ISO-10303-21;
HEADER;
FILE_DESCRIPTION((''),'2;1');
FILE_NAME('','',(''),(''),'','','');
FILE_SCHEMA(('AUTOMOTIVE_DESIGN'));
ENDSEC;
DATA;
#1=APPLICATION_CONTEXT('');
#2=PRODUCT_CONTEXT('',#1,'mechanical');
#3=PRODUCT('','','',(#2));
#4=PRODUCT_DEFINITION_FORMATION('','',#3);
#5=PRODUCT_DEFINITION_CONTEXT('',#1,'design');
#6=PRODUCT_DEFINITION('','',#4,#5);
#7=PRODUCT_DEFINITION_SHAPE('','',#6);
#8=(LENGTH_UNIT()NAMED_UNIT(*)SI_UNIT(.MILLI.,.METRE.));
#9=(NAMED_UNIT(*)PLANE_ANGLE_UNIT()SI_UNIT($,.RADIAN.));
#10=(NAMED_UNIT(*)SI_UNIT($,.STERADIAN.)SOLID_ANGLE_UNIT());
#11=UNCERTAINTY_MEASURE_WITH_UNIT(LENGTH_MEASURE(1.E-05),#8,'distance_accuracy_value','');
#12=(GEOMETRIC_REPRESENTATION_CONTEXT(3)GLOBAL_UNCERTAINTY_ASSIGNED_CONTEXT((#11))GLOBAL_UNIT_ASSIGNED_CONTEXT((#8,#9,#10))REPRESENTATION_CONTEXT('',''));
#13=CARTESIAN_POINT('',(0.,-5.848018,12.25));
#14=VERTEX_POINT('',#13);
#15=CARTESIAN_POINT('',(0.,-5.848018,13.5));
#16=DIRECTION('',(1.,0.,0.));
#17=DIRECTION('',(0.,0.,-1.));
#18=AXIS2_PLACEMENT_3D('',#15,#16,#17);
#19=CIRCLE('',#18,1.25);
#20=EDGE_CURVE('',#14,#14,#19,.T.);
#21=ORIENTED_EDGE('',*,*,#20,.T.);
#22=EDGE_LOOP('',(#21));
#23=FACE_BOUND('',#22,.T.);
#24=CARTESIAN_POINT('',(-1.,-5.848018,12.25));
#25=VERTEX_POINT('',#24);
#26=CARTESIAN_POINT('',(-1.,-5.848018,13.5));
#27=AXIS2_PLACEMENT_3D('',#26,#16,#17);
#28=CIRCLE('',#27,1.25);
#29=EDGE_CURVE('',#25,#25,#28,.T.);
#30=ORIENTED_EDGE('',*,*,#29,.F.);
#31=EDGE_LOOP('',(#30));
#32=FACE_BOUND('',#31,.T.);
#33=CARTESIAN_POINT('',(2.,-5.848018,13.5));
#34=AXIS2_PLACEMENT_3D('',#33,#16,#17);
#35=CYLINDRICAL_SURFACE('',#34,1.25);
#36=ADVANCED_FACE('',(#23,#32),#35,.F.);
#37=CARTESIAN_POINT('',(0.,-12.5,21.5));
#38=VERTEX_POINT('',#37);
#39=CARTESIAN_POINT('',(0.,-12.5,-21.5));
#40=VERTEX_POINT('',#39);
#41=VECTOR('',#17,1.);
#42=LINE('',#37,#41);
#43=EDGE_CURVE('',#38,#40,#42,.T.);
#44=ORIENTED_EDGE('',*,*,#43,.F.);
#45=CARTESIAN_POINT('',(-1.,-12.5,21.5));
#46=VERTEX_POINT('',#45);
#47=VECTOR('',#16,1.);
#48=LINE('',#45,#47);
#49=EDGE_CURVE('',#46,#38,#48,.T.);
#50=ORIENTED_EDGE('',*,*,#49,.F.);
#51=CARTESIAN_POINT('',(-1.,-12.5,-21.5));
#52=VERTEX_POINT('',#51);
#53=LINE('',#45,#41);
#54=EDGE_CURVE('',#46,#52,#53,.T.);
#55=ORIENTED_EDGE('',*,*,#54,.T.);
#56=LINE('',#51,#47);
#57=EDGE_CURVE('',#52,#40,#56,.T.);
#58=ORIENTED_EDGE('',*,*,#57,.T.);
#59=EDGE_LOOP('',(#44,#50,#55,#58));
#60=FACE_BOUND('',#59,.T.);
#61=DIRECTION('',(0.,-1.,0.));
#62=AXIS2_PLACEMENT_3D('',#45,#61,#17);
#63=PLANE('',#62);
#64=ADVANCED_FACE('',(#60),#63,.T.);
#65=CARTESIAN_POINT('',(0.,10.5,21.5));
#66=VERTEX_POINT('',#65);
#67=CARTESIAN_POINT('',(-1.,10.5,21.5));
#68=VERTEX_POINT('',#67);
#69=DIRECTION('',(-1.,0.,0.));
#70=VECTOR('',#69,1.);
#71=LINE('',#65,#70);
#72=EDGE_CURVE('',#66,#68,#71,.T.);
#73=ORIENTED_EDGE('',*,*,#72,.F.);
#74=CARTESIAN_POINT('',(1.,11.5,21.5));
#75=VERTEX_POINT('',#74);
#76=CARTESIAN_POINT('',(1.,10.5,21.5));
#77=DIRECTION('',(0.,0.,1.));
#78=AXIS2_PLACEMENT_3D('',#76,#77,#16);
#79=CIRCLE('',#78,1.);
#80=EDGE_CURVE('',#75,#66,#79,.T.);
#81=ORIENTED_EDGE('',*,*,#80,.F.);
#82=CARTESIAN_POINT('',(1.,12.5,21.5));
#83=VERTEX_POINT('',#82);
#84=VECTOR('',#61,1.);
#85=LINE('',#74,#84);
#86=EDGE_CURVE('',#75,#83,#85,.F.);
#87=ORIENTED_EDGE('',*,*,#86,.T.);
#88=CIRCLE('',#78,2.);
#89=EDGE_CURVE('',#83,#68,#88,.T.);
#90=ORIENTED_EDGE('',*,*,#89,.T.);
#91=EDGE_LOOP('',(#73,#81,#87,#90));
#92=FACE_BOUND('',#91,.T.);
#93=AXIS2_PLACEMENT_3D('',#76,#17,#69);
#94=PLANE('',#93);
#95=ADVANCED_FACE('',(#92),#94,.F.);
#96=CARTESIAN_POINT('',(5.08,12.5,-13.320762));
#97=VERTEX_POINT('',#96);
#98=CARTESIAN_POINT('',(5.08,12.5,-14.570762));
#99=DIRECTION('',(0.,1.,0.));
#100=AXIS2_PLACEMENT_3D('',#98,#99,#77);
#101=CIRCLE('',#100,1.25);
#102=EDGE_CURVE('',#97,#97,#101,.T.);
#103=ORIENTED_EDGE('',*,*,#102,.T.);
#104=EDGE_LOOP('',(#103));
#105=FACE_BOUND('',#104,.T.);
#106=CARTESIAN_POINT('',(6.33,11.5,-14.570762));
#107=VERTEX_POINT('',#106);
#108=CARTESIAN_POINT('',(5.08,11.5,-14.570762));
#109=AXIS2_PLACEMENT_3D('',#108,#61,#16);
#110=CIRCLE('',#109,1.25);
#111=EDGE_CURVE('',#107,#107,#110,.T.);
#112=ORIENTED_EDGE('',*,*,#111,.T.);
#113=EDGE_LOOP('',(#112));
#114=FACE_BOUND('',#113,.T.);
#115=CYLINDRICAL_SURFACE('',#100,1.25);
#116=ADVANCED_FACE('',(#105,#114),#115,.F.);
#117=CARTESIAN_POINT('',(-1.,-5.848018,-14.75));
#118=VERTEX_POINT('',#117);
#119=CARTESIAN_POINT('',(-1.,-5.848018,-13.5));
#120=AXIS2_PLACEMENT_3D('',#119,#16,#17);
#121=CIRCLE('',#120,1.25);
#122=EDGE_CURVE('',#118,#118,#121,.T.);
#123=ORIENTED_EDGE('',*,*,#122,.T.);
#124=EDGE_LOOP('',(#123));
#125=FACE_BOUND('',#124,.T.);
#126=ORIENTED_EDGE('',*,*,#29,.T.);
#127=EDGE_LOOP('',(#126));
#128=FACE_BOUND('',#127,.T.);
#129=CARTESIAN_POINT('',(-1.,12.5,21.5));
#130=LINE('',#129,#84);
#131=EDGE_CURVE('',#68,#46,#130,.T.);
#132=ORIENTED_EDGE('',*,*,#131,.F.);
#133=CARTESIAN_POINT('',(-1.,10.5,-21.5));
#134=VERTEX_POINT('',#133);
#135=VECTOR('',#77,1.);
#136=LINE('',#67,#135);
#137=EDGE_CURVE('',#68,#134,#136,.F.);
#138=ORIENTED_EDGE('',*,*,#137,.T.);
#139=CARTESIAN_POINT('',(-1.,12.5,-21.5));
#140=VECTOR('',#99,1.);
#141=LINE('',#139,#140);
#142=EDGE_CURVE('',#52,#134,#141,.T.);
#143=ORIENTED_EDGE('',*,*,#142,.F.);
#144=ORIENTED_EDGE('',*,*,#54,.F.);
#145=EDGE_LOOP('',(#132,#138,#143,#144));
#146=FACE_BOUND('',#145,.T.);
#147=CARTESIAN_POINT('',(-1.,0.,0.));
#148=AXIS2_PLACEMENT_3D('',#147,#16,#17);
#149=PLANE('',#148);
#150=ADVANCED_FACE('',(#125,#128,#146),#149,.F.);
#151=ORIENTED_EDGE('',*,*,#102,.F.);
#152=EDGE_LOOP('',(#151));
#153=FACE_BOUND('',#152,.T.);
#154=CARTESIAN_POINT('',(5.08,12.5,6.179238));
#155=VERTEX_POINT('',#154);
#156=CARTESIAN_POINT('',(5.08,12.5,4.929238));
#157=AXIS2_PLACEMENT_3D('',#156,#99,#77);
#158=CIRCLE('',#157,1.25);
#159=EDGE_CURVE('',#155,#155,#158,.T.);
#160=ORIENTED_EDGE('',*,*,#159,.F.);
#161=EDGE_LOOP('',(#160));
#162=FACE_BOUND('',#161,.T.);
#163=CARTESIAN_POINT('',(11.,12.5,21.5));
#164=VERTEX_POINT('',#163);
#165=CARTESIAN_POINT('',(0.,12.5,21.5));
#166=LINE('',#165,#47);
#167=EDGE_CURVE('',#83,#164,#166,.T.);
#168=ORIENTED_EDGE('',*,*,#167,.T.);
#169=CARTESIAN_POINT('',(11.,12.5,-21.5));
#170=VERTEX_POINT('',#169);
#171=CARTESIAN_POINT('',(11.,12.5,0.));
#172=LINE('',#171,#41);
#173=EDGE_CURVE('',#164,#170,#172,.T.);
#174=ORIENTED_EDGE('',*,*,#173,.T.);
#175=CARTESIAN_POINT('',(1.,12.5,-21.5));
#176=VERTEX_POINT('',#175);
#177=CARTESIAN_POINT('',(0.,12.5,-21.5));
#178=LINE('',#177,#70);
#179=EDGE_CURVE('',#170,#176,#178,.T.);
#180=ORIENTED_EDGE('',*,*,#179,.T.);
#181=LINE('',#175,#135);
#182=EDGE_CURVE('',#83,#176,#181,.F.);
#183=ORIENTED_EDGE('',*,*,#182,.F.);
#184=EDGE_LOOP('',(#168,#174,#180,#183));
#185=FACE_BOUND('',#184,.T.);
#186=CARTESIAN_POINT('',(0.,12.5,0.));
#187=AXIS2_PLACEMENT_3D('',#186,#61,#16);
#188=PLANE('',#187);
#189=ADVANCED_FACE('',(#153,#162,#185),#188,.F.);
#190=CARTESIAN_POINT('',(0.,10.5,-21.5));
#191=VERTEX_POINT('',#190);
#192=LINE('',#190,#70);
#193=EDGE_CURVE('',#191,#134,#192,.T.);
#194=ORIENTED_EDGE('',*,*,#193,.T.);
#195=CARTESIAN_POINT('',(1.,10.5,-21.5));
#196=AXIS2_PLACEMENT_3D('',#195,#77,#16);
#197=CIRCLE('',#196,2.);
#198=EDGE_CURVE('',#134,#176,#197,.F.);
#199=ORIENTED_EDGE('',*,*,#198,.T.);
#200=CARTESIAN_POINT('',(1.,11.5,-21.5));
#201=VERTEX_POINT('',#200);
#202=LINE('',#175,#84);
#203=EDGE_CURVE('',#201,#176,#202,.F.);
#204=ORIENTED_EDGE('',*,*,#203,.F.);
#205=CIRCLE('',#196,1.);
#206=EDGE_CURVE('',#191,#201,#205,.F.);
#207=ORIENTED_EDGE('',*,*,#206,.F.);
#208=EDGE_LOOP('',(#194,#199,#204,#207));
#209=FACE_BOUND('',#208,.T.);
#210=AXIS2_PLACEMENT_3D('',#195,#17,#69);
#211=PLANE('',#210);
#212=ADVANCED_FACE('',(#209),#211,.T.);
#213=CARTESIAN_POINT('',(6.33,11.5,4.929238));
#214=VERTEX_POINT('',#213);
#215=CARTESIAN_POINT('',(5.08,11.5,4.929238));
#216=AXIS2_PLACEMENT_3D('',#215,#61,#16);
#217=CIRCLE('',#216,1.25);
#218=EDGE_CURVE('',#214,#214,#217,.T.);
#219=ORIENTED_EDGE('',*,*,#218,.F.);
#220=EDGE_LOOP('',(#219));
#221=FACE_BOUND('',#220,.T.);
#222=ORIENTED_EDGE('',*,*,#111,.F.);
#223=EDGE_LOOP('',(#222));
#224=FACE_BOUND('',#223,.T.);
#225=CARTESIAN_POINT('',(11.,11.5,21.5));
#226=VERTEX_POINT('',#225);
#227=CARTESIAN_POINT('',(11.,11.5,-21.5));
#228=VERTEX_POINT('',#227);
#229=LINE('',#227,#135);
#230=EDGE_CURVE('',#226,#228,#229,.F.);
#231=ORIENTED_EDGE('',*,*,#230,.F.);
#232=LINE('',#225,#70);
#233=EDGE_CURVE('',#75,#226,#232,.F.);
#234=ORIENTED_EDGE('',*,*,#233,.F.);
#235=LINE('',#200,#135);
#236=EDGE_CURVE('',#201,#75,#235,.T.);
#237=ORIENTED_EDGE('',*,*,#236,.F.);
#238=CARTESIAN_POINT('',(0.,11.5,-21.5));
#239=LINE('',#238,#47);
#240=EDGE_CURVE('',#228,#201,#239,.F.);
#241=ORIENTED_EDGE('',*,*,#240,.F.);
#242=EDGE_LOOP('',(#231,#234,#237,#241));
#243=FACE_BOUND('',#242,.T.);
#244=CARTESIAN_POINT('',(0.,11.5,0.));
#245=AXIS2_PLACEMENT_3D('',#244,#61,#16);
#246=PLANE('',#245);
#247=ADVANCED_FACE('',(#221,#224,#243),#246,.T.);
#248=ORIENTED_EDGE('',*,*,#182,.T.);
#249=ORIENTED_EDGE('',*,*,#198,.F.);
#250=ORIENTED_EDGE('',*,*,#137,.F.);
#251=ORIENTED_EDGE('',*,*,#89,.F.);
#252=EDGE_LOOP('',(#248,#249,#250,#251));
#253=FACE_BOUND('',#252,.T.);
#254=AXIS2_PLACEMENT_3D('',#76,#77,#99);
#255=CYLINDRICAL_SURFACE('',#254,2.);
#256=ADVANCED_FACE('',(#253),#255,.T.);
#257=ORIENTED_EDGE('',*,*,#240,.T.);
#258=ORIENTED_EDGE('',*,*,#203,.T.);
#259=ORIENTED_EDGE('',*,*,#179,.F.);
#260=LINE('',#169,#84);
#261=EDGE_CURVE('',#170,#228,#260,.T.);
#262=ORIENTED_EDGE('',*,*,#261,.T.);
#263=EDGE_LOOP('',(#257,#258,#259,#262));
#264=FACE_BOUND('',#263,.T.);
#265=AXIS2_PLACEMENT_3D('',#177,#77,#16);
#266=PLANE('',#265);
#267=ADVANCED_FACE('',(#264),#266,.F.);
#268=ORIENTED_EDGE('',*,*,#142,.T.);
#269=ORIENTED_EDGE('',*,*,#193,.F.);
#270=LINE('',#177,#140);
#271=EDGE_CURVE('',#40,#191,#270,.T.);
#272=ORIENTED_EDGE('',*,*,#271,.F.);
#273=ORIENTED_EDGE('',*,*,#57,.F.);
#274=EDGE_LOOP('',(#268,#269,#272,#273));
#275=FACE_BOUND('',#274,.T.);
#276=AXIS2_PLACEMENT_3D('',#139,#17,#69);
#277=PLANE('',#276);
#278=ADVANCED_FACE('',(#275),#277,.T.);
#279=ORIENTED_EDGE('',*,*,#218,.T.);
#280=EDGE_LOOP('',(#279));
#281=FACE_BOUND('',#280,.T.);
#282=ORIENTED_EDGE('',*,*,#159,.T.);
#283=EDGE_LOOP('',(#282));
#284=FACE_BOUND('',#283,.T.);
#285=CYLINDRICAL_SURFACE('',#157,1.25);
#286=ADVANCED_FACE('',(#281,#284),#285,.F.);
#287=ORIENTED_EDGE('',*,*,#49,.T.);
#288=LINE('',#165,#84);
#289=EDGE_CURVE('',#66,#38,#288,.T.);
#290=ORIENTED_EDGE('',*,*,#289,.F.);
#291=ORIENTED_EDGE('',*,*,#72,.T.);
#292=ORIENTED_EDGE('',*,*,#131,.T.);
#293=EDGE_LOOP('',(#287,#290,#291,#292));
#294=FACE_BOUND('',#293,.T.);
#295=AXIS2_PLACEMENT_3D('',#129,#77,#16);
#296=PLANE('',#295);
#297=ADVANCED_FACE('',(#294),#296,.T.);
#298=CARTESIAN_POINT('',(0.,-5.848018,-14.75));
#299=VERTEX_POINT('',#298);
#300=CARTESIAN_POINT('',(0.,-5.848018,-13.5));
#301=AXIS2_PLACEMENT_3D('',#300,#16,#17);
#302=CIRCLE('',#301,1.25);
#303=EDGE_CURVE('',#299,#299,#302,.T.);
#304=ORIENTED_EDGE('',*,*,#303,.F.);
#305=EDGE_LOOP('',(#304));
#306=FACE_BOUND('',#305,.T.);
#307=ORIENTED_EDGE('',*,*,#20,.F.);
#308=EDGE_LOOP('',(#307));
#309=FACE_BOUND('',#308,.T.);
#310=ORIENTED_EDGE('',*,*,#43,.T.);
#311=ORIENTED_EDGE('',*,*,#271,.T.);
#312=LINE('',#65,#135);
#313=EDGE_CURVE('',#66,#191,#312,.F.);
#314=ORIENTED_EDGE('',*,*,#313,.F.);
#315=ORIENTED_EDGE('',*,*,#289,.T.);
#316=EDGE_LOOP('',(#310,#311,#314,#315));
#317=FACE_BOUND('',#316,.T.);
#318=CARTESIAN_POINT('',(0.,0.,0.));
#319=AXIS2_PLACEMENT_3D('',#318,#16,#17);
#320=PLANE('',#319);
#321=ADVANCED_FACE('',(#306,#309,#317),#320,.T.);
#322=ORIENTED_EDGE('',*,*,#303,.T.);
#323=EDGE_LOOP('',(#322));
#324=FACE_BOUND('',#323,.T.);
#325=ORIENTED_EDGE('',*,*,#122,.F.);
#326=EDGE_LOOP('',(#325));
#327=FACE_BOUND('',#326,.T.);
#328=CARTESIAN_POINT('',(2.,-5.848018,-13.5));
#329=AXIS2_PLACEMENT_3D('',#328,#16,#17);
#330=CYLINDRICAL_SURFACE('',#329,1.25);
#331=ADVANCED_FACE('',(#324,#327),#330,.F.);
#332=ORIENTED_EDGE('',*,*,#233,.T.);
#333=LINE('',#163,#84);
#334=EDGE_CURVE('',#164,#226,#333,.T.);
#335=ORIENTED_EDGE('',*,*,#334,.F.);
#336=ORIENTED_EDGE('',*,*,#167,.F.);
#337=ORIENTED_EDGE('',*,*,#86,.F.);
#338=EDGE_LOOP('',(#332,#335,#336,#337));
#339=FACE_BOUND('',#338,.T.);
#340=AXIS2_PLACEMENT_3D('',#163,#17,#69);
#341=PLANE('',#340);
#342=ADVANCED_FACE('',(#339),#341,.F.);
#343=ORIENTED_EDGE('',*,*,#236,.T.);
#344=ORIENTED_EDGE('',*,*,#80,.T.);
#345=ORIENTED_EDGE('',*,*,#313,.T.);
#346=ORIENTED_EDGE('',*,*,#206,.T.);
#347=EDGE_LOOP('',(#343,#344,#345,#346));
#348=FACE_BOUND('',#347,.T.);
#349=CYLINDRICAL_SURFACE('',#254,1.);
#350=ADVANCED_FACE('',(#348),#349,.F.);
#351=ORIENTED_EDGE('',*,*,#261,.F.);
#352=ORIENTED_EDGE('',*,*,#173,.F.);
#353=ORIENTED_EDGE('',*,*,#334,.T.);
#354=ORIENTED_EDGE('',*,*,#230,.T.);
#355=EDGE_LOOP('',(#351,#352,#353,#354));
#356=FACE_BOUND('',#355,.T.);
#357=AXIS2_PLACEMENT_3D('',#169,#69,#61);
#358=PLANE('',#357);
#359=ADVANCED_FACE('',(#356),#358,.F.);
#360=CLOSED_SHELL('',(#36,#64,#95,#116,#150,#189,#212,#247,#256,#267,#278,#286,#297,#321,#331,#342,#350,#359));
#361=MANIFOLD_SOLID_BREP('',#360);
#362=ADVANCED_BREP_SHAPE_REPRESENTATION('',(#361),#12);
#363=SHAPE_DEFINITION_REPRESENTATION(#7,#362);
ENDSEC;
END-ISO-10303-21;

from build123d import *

# Parameters (mm, degrees)
SKETCH1_W                    = 43
SKETCH1_H                    = 25
BASE_FLANGE1_DEPTH           = 1
EDGE_FLANGE1_STRIP_W         = 6
EDGE_FLANGE1_STRIP_H         = 1
EDGE_FLANGE1_STRIP_CUT_DEPTH = 43
EDGE_FLANGE1_DEPTH           = 43
TAP_DRILL_FOR_M3_TAP1_D      = 2.5
TAP_DRILL_FOR_M3_TAP2_D      = 2.5
TAP_DRILL_FOR_M3_TAP2_DEPTH  = 10
TAP_DRILL_FOR_M3_TAP2_TIP    = 0.751075774


# Sheet-metal steps are written as plain solids
with BuildPart() as part:
    # Sketch1 → Base-Flange1 (new body)
    with BuildSketch(Plane(origin=(0, 0, 0), x_dir=(0, 0, -1), z_dir=(1, 0, 0))):
        Rectangle(SKETCH1_W, SKETCH1_H)
    extrude(amount=-BASE_FLANGE1_DEPTH)

    # Edge-Flange1 strip (across the edge) → Edge-Flange1 strip cut (cut)
    with BuildSketch(Plane(origin=(0, 12.5, -21.5), x_dir=(0, -1, 0), z_dir=(0, 0, 1))):
        with Locations((-1, -0.5)):
            Rectangle(EDGE_FLANGE1_STRIP_W, EDGE_FLANGE1_STRIP_H)
    extrude(amount=EDGE_FLANGE1_STRIP_CUT_DEPTH, mode=Mode.SUBTRACT)

    # Edge-Flange1 section (across the edge) → Edge-Flange1 (add)
    with BuildSketch(Plane(origin=(0, 12.5, -21.5), x_dir=(0, -1, 0), z_dir=(0, 0, 1))):
        with BuildLine():
            Line((0, 1), (0, 11))
            Line((0, 11), (1, 11))
            Line((1, 11), (1, 1))
            ThreePointArc((1, 1), (1.292893219, 0.292893219), (2, 0))
            Line((2, 0), (2, -1))
            ThreePointArc((2, -1), (0.585786438, -0.414213562), (0, 1))
        make_face()
    extrude(amount=EDGE_FLANGE1_DEPTH)

    # Tap Drill for M3 Tap1 (through all)
    with Locations(Plane(origin=(-360.471522339, 12.5, -232.457964235), x_dir=(-1, 0, 0), z_dir=(0, 1, 0))):
        with Locations((-365.551522339, 237.387201908), (-365.551522339, 217.887201908)):
            Hole(TAP_DRILL_FOR_M3_TAP1_D / 2)

    # Tap Drill for M3 Tap2
    with Locations(Plane(origin=(2, 426.094482546, -232.457964235), x_dir=(0, 1, 0), z_dir=(1, 0, 0))):
        with Locations((-431.942500863, 218.957964235), (-431.942500863, 245.957964235)):
            Hole(TAP_DRILL_FOR_M3_TAP2_D / 2, depth=TAP_DRILL_FOR_M3_TAP2_DEPTH)
            with Locations((0, 0, -(TAP_DRILL_FOR_M3_TAP2_DEPTH + TAP_DRILL_FOR_M3_TAP2_TIP / 2))):  # 118° drill point
                Cone(0, TAP_DRILL_FOR_M3_TAP2_D / 2, TAP_DRILL_FOR_M3_TAP2_TIP, mode=Mode.SUBTRACT)


solid = part.part
